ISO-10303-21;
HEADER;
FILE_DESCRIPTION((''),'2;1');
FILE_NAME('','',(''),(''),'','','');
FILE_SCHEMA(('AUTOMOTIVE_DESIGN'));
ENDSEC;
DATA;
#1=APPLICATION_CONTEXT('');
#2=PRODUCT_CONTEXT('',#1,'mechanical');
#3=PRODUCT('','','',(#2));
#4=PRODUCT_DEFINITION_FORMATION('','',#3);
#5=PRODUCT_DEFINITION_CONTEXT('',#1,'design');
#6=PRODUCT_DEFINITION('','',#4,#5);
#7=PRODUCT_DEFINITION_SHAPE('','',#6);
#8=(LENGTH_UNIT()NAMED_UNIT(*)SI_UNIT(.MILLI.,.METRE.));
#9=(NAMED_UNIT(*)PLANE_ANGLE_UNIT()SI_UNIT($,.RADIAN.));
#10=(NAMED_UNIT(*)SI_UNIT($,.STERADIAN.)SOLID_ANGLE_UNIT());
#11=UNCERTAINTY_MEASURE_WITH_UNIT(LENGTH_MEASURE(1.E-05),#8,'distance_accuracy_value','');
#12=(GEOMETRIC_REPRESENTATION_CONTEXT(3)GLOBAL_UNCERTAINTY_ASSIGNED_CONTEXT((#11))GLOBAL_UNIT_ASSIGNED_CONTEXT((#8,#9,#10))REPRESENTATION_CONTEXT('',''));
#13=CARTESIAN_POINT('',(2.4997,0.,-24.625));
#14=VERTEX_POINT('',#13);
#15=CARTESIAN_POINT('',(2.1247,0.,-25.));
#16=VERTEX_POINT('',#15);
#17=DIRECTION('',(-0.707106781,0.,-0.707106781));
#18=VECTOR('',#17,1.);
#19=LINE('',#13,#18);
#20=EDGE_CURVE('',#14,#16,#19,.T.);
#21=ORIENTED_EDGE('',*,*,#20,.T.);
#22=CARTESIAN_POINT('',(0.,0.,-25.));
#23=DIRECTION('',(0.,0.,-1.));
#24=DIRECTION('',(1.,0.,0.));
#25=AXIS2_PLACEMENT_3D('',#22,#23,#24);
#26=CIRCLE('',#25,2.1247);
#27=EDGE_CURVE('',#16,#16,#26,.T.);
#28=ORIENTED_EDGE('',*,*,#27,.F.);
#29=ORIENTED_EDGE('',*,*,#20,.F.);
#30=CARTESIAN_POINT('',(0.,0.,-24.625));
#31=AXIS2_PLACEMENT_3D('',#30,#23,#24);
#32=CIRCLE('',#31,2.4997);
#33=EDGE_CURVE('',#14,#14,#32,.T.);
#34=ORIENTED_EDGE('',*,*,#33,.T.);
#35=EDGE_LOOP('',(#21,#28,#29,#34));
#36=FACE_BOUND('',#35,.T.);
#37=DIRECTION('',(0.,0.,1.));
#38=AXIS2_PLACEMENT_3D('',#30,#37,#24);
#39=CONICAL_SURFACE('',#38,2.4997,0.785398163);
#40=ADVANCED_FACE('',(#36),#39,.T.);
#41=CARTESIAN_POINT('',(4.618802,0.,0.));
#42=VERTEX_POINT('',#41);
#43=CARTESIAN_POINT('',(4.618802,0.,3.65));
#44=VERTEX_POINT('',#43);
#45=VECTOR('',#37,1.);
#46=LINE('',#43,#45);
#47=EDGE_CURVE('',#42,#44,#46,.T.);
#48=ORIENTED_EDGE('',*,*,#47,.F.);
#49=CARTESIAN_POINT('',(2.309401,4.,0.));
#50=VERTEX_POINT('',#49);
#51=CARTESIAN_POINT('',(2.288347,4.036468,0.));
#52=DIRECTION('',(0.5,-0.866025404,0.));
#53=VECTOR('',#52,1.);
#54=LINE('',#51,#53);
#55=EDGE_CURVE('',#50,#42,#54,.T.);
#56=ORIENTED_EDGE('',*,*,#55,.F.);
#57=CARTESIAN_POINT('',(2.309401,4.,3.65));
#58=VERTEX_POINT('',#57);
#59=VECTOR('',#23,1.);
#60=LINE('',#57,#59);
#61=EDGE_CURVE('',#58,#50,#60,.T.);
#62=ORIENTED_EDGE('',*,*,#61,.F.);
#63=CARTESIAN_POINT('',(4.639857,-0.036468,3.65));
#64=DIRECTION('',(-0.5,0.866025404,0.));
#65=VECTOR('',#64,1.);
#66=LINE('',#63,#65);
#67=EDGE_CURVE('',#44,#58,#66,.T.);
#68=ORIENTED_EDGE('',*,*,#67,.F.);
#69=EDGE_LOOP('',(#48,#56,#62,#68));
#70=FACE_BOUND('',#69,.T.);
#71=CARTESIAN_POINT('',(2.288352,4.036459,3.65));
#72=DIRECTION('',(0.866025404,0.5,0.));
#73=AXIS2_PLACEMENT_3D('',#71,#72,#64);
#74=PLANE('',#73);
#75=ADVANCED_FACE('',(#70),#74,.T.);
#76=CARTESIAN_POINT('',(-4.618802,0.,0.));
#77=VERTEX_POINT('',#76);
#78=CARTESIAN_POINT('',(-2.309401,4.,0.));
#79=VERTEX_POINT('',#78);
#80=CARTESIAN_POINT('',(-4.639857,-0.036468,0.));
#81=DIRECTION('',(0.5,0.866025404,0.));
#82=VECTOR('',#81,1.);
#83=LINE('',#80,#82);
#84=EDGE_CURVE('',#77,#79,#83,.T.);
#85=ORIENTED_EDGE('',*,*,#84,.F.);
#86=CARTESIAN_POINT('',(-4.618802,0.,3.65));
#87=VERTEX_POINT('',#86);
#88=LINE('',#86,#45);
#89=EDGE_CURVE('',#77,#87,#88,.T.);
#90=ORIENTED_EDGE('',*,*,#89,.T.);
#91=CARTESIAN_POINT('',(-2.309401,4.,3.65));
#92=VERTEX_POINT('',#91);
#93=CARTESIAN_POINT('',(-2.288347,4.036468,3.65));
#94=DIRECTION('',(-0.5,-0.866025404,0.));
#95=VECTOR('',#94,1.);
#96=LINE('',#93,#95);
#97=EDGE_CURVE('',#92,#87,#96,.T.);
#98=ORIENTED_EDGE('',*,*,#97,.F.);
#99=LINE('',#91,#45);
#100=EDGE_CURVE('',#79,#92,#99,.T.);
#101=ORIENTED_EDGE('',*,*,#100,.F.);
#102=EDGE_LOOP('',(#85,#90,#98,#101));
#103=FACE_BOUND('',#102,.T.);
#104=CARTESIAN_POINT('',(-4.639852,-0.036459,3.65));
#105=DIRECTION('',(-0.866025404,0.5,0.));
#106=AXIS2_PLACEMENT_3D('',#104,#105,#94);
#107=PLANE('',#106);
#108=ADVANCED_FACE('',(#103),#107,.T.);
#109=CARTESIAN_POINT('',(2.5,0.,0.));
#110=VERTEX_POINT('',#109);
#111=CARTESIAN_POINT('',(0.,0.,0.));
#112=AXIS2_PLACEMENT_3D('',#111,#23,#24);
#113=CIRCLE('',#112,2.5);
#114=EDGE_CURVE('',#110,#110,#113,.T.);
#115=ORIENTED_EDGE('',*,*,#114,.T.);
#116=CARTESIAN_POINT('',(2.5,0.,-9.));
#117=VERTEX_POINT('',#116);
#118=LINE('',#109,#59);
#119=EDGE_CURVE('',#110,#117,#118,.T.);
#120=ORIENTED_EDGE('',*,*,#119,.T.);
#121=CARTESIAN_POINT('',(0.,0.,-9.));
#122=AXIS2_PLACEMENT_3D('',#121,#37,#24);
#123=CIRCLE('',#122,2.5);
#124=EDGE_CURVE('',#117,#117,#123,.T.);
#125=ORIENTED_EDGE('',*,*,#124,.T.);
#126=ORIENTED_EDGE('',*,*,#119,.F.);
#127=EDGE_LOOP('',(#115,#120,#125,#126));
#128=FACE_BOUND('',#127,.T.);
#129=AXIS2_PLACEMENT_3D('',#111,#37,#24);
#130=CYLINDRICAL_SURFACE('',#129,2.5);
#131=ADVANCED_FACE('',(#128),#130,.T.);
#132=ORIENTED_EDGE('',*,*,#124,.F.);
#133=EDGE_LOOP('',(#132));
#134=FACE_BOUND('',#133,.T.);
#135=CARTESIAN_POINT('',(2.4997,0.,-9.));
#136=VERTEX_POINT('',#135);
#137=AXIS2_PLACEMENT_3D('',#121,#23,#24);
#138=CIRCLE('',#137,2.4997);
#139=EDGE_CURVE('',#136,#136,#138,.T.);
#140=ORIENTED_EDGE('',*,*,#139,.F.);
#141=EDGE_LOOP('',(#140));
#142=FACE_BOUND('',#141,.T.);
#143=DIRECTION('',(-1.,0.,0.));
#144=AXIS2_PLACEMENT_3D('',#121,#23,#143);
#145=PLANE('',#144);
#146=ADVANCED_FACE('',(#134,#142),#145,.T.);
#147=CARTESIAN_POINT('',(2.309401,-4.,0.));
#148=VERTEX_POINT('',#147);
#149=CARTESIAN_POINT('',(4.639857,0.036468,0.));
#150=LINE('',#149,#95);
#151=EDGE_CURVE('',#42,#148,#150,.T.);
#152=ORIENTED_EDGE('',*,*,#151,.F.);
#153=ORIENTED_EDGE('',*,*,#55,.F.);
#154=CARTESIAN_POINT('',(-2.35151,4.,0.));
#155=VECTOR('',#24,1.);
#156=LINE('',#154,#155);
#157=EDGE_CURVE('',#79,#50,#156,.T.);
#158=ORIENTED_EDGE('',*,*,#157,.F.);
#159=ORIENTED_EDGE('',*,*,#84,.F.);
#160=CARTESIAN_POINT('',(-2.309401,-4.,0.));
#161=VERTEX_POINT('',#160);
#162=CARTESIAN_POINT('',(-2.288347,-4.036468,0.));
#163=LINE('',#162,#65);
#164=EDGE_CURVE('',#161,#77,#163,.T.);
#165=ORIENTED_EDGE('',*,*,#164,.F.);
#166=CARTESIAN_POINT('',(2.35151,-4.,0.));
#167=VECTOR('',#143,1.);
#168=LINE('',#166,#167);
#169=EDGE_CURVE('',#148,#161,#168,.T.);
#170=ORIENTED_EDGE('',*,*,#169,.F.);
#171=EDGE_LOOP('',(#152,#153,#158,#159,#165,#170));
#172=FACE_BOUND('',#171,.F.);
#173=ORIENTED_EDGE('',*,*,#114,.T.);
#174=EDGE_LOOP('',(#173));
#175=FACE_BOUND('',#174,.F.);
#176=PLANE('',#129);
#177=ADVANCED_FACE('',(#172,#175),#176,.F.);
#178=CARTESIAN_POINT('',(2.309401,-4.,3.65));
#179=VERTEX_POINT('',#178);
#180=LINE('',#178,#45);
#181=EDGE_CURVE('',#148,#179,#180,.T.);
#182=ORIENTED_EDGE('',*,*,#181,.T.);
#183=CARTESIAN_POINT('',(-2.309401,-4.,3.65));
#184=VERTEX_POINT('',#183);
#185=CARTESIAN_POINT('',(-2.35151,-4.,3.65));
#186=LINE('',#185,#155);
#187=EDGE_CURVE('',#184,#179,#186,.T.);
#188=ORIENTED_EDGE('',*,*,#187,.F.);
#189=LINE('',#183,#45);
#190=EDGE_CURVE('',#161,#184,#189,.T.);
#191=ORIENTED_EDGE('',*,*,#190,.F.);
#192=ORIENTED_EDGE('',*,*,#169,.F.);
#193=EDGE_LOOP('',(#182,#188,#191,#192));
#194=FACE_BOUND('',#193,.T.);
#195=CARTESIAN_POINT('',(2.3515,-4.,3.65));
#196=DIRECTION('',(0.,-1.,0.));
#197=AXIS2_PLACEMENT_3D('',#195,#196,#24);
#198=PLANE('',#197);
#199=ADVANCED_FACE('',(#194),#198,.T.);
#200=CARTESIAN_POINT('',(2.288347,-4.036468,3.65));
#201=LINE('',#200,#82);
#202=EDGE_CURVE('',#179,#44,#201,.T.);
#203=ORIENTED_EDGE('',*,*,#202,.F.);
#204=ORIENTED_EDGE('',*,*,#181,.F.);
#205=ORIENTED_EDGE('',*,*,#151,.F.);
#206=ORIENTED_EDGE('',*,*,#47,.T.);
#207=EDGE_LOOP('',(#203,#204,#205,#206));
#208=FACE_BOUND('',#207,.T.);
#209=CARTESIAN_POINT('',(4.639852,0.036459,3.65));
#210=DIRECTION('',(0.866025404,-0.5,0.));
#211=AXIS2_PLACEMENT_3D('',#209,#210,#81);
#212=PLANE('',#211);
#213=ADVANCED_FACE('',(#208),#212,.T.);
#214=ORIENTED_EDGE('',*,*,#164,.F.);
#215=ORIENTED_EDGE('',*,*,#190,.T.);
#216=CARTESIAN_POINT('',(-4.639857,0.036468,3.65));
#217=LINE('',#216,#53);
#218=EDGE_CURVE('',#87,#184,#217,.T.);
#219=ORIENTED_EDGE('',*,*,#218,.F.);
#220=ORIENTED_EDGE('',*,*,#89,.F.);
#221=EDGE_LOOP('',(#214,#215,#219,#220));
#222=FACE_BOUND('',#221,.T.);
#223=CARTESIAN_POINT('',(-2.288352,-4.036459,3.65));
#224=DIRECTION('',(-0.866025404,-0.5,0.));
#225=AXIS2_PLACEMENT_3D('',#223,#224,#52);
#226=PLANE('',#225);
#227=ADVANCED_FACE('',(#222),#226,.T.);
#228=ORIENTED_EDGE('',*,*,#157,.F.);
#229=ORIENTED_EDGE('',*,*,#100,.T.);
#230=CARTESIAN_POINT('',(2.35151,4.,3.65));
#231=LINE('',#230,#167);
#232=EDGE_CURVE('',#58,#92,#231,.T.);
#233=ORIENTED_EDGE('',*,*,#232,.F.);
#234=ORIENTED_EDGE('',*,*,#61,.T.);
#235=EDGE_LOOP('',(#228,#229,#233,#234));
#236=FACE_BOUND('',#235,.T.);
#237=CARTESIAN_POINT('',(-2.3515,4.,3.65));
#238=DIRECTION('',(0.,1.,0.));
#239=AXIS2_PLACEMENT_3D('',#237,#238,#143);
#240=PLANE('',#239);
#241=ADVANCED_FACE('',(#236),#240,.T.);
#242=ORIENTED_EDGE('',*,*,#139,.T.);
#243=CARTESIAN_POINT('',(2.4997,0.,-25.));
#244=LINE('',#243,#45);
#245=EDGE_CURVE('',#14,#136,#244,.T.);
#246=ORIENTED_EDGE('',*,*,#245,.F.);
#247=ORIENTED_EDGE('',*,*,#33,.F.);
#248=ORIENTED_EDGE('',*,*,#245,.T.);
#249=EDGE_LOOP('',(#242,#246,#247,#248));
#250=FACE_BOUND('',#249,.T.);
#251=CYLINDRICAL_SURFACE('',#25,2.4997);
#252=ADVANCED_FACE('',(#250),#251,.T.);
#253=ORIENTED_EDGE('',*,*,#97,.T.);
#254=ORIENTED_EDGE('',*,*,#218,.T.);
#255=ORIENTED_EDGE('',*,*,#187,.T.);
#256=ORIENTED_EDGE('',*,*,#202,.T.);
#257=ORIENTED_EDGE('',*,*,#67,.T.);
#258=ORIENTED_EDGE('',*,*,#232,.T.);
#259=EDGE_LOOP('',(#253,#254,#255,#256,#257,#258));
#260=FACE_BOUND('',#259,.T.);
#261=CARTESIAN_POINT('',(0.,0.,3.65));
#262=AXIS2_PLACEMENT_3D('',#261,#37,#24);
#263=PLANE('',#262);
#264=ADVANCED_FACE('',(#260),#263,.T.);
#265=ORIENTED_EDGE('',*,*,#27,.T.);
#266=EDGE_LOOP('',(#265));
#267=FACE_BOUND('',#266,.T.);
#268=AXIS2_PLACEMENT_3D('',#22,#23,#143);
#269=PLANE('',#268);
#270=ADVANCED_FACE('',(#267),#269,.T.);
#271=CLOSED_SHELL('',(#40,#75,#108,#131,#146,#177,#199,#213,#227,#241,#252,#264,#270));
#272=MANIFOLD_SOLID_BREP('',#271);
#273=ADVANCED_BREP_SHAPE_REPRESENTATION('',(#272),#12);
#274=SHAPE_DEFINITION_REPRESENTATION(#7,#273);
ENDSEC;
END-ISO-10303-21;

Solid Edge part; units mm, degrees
sketch "Sketch1" plane through (0, 0, 0) normal (0, 0, 1) x (1, 0, 0)
  circle A0 centre (0, 0) radius 4.64
  dimension "D1" = 9.28
extrude "Protrusion1" add sketch "Sketch1" along normal blind 3.65
sketch "Sketch2" plane through (0, 0, 0) normal (0, 0, -1) x (1, 0, 0)
  circle A0 centre (0, 0) radius 2.5
extrude "Protrusion2" add sketch "Sketch2" along normal blind 25
sketch "Sketch3" plane through (0, 0, -25) normal (0, 0, -1) x (1, 0, 0)
  circle A0 centre (0, 0) radius 2.4997
extrude "Cutout1" cut sketch "Sketch3" against normal blind 16 flip side to cut
chamfer "Chamfer_1" distance 0.375 angle 45 1 edges at (-2.4997, 0, -25)
sketch "Sketch4" plane through (0, 0, 3.65) normal (0, 0, 1) x (1, 0, 0)
  line L0 (-2.3515, 4) -> (2.3515, 4)
  dimension "D1" = 8
extrude "Cutout2" cut sketch "Sketch4" against normal up to next material side at (0, 4.05, 3.65)
pattern_circular "Pattern1" count 6 over 360 about axis through (0, 0, 3.65) along (0, 0, 1) of "Cutout2"
properties part number "24104783"
